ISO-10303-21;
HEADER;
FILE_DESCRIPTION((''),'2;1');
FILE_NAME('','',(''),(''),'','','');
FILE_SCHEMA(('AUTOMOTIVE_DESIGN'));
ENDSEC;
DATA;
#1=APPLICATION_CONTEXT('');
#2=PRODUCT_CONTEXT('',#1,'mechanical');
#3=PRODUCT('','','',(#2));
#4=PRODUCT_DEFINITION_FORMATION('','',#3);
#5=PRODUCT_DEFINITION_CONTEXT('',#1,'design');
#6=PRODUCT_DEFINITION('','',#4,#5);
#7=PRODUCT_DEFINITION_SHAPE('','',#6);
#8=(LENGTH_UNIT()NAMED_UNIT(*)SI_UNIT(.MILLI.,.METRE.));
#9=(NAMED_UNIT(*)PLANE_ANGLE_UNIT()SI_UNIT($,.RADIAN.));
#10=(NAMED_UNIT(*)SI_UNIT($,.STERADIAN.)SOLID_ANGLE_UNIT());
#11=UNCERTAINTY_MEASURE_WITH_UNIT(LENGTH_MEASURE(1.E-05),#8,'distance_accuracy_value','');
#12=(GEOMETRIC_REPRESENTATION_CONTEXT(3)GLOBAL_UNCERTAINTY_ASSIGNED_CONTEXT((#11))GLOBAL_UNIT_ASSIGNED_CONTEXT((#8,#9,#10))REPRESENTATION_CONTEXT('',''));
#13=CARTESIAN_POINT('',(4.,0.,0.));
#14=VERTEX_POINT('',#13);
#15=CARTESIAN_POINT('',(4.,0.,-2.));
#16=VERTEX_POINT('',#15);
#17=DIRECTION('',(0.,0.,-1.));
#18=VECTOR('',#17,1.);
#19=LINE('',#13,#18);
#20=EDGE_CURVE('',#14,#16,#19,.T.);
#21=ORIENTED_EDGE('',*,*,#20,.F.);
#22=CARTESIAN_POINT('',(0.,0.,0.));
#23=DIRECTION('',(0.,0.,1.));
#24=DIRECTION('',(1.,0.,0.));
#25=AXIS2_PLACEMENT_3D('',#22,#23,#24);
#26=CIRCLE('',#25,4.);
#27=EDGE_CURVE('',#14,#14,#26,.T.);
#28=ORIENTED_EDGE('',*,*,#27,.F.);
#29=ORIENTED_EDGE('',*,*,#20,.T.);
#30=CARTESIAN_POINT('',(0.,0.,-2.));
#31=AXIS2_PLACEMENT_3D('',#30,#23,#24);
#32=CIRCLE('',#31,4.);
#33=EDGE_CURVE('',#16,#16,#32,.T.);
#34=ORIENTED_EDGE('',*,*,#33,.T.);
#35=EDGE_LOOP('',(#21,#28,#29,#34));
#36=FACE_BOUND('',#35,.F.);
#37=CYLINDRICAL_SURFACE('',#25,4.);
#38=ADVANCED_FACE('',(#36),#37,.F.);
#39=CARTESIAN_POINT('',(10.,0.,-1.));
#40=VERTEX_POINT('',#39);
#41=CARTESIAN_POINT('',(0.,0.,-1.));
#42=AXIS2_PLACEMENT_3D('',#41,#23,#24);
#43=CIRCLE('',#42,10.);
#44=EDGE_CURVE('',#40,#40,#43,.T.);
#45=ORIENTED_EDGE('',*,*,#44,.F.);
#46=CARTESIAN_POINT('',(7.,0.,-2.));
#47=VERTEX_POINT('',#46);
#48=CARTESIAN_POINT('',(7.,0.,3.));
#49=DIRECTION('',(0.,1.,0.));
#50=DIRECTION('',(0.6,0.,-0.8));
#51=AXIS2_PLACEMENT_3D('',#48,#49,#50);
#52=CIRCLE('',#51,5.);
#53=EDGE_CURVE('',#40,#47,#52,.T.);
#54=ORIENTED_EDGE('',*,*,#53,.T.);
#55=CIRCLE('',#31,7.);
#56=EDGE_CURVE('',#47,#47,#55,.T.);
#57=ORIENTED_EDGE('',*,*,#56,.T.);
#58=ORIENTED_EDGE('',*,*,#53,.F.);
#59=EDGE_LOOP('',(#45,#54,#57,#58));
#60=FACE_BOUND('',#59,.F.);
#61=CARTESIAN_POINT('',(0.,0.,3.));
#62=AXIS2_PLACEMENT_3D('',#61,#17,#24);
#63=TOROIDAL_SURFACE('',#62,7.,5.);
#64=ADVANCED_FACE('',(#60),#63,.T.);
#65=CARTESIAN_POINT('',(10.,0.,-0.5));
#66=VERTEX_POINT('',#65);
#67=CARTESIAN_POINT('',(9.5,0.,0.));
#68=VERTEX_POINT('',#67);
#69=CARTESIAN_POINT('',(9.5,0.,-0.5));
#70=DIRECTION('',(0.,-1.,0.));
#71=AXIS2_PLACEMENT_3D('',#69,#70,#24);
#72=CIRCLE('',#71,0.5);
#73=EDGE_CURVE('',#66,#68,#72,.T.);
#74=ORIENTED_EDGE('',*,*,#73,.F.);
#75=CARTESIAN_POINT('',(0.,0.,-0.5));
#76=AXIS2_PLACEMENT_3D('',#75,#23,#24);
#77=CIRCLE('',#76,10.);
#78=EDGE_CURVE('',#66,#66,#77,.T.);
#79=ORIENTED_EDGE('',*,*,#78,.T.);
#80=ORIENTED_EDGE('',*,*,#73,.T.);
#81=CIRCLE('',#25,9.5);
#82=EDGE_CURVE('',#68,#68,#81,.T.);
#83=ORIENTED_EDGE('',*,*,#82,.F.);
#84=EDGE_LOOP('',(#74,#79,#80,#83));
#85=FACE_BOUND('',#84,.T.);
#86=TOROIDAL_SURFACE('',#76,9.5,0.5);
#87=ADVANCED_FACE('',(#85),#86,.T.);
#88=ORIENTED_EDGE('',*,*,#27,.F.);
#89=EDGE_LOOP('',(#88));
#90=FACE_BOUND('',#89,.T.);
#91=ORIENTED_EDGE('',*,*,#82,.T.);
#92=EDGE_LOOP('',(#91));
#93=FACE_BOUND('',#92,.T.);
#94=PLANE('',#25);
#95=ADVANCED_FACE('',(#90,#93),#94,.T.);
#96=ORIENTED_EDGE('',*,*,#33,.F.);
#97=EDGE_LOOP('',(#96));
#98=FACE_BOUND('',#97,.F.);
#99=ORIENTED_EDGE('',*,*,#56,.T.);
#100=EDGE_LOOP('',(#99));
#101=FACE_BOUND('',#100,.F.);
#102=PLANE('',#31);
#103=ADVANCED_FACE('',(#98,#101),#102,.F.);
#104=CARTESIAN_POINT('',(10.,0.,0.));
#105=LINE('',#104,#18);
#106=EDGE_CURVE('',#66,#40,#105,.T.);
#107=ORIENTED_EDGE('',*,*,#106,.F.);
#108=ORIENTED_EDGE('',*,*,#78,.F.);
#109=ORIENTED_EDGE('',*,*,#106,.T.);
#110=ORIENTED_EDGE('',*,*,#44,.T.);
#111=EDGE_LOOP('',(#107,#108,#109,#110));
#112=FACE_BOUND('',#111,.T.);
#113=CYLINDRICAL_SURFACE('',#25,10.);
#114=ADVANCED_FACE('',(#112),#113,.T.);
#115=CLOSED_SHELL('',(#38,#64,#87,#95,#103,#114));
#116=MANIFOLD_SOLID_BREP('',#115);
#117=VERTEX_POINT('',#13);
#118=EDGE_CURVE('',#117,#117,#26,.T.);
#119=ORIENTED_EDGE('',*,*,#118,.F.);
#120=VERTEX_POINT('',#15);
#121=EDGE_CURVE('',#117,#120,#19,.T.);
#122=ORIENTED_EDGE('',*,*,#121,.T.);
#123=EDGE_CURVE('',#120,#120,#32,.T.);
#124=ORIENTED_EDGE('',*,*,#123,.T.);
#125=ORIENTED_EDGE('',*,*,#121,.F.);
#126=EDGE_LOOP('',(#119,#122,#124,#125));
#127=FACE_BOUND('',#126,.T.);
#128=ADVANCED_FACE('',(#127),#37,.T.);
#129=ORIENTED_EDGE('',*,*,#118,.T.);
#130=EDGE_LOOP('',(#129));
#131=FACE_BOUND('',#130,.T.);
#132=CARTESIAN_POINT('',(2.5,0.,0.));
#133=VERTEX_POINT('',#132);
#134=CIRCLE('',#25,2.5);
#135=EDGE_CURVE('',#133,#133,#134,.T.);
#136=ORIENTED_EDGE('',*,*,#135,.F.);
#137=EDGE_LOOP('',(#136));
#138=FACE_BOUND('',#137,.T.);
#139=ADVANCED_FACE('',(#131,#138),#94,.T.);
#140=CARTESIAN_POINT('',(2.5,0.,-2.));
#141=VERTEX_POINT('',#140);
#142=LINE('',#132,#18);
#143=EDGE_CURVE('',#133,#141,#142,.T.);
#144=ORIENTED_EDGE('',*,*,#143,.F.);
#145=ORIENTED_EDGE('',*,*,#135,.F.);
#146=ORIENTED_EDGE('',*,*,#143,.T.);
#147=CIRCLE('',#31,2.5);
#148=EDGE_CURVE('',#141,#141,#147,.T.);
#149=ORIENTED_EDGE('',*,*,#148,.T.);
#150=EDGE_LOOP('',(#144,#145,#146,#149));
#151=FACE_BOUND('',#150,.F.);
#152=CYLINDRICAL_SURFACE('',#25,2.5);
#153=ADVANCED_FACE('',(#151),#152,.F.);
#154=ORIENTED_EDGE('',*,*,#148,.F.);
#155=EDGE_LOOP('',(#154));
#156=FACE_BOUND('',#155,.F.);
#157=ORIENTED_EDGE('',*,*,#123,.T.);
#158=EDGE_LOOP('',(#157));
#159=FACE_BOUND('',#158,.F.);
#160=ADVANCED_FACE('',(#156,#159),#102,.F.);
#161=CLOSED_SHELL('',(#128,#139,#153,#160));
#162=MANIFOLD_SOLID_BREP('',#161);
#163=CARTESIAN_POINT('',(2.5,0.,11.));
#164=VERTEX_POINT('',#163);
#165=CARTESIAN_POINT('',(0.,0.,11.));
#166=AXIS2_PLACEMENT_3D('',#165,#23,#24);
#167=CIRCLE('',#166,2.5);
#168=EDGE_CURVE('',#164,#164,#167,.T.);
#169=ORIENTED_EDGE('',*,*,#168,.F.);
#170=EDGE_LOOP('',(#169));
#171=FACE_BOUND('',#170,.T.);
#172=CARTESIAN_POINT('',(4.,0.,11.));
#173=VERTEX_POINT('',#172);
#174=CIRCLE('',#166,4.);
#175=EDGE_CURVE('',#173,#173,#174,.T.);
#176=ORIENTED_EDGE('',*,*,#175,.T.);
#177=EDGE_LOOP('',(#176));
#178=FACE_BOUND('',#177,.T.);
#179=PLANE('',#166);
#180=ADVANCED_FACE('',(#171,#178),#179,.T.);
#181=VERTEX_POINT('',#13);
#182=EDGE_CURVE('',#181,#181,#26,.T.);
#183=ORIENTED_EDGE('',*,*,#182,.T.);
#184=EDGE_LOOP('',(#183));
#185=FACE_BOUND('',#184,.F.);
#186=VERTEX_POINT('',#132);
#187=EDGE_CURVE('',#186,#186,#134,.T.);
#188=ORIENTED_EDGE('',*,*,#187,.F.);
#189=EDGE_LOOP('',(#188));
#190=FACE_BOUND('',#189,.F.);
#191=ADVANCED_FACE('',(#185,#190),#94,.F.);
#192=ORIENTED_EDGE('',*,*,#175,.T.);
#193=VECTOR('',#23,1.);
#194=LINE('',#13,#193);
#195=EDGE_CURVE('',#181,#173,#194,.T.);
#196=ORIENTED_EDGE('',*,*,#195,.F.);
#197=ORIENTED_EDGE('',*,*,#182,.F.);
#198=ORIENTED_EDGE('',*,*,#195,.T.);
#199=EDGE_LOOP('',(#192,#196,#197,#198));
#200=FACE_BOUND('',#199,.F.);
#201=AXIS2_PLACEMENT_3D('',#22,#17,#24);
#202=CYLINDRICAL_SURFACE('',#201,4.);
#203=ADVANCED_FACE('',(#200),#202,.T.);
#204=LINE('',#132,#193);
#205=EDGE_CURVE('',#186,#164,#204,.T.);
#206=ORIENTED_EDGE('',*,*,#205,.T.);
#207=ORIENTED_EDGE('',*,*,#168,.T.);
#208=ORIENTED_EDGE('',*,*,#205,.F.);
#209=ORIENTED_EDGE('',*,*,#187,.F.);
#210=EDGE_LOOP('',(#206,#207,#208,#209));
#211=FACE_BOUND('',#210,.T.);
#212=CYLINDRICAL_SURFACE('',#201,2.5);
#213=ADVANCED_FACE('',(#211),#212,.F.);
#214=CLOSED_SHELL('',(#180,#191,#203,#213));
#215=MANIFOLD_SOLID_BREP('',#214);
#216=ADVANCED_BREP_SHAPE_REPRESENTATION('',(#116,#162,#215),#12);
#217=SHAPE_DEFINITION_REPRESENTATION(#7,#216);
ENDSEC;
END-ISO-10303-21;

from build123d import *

# Parameters (mm, degrees)
F0_R     = 10
F0_R_2   = 4
F1_DEPTH = 2
F0_R_3   = 2.5
F2_DEPTH = 11
F3_R     = 0.5
F4_DEPTH = 2
F5_SIZE  = 1


# Not quite as in the source:
# - a fillet or chamfer that OpenCascade refuses, or shapes differently, is made with other operations: its cross-section is extruded or revolved along the edge and cut away or added


with BuildPart() as f1:
    # F0 (on Top) → F1 (new body)
    with BuildSketch(Plane.XY):
        Circle(F0_R)
        Circle(F0_R_2, mode=Mode.SUBTRACT)
    extrude(amount=-F1_DEPTH)

    # F3
    f3_edges = [f1.edges().sort_by_distance(p)[0] for p in [
        (-10, 0, 0),
    ]]
    fillet(f3_edges, radius=F3_R)

    # F5
    f5_edges = [f1.edges().sort_by_distance(p)[0] for p in [
        (-10, 0, -2),
    ]]
    chamfer(f5_edges, length=F5_SIZE)

    # F6: fillet of radius 5 on 1 edges, made by hand

    # F6_s1 → F6_t2 (revolve, cut)
    with BuildSketch(Plane.XZ):
        with BuildLine():
            ThreePointArc((10, -1), (8.5811388301, -1.7434164903), (7, -2))
            Line((7, -2), (9, -2))
            Line((9, -2), (10, -1))
        make_face()
    revolve(axis=Axis((0, 0, -2), (0, 0, 1)), mode=Mode.SUBTRACT)


with BuildPart() as f2:
    # F0 (on Top) → F2 (new body)
    with BuildSketch(Plane.XY):
        Circle(F0_R_2)
        Circle(F0_R_3, mode=Mode.SUBTRACT)
    extrude(amount=F2_DEPTH)


with BuildPart() as f4:
    # F0 (on Top) → F4 (new body)
    with BuildSketch(Plane.XY):
        Circle(F0_R_2)
        Circle(F0_R_3, mode=Mode.SUBTRACT)
    extrude(amount=-F4_DEPTH)


solid = Compound([f1.part, f2.part, f4.part])
